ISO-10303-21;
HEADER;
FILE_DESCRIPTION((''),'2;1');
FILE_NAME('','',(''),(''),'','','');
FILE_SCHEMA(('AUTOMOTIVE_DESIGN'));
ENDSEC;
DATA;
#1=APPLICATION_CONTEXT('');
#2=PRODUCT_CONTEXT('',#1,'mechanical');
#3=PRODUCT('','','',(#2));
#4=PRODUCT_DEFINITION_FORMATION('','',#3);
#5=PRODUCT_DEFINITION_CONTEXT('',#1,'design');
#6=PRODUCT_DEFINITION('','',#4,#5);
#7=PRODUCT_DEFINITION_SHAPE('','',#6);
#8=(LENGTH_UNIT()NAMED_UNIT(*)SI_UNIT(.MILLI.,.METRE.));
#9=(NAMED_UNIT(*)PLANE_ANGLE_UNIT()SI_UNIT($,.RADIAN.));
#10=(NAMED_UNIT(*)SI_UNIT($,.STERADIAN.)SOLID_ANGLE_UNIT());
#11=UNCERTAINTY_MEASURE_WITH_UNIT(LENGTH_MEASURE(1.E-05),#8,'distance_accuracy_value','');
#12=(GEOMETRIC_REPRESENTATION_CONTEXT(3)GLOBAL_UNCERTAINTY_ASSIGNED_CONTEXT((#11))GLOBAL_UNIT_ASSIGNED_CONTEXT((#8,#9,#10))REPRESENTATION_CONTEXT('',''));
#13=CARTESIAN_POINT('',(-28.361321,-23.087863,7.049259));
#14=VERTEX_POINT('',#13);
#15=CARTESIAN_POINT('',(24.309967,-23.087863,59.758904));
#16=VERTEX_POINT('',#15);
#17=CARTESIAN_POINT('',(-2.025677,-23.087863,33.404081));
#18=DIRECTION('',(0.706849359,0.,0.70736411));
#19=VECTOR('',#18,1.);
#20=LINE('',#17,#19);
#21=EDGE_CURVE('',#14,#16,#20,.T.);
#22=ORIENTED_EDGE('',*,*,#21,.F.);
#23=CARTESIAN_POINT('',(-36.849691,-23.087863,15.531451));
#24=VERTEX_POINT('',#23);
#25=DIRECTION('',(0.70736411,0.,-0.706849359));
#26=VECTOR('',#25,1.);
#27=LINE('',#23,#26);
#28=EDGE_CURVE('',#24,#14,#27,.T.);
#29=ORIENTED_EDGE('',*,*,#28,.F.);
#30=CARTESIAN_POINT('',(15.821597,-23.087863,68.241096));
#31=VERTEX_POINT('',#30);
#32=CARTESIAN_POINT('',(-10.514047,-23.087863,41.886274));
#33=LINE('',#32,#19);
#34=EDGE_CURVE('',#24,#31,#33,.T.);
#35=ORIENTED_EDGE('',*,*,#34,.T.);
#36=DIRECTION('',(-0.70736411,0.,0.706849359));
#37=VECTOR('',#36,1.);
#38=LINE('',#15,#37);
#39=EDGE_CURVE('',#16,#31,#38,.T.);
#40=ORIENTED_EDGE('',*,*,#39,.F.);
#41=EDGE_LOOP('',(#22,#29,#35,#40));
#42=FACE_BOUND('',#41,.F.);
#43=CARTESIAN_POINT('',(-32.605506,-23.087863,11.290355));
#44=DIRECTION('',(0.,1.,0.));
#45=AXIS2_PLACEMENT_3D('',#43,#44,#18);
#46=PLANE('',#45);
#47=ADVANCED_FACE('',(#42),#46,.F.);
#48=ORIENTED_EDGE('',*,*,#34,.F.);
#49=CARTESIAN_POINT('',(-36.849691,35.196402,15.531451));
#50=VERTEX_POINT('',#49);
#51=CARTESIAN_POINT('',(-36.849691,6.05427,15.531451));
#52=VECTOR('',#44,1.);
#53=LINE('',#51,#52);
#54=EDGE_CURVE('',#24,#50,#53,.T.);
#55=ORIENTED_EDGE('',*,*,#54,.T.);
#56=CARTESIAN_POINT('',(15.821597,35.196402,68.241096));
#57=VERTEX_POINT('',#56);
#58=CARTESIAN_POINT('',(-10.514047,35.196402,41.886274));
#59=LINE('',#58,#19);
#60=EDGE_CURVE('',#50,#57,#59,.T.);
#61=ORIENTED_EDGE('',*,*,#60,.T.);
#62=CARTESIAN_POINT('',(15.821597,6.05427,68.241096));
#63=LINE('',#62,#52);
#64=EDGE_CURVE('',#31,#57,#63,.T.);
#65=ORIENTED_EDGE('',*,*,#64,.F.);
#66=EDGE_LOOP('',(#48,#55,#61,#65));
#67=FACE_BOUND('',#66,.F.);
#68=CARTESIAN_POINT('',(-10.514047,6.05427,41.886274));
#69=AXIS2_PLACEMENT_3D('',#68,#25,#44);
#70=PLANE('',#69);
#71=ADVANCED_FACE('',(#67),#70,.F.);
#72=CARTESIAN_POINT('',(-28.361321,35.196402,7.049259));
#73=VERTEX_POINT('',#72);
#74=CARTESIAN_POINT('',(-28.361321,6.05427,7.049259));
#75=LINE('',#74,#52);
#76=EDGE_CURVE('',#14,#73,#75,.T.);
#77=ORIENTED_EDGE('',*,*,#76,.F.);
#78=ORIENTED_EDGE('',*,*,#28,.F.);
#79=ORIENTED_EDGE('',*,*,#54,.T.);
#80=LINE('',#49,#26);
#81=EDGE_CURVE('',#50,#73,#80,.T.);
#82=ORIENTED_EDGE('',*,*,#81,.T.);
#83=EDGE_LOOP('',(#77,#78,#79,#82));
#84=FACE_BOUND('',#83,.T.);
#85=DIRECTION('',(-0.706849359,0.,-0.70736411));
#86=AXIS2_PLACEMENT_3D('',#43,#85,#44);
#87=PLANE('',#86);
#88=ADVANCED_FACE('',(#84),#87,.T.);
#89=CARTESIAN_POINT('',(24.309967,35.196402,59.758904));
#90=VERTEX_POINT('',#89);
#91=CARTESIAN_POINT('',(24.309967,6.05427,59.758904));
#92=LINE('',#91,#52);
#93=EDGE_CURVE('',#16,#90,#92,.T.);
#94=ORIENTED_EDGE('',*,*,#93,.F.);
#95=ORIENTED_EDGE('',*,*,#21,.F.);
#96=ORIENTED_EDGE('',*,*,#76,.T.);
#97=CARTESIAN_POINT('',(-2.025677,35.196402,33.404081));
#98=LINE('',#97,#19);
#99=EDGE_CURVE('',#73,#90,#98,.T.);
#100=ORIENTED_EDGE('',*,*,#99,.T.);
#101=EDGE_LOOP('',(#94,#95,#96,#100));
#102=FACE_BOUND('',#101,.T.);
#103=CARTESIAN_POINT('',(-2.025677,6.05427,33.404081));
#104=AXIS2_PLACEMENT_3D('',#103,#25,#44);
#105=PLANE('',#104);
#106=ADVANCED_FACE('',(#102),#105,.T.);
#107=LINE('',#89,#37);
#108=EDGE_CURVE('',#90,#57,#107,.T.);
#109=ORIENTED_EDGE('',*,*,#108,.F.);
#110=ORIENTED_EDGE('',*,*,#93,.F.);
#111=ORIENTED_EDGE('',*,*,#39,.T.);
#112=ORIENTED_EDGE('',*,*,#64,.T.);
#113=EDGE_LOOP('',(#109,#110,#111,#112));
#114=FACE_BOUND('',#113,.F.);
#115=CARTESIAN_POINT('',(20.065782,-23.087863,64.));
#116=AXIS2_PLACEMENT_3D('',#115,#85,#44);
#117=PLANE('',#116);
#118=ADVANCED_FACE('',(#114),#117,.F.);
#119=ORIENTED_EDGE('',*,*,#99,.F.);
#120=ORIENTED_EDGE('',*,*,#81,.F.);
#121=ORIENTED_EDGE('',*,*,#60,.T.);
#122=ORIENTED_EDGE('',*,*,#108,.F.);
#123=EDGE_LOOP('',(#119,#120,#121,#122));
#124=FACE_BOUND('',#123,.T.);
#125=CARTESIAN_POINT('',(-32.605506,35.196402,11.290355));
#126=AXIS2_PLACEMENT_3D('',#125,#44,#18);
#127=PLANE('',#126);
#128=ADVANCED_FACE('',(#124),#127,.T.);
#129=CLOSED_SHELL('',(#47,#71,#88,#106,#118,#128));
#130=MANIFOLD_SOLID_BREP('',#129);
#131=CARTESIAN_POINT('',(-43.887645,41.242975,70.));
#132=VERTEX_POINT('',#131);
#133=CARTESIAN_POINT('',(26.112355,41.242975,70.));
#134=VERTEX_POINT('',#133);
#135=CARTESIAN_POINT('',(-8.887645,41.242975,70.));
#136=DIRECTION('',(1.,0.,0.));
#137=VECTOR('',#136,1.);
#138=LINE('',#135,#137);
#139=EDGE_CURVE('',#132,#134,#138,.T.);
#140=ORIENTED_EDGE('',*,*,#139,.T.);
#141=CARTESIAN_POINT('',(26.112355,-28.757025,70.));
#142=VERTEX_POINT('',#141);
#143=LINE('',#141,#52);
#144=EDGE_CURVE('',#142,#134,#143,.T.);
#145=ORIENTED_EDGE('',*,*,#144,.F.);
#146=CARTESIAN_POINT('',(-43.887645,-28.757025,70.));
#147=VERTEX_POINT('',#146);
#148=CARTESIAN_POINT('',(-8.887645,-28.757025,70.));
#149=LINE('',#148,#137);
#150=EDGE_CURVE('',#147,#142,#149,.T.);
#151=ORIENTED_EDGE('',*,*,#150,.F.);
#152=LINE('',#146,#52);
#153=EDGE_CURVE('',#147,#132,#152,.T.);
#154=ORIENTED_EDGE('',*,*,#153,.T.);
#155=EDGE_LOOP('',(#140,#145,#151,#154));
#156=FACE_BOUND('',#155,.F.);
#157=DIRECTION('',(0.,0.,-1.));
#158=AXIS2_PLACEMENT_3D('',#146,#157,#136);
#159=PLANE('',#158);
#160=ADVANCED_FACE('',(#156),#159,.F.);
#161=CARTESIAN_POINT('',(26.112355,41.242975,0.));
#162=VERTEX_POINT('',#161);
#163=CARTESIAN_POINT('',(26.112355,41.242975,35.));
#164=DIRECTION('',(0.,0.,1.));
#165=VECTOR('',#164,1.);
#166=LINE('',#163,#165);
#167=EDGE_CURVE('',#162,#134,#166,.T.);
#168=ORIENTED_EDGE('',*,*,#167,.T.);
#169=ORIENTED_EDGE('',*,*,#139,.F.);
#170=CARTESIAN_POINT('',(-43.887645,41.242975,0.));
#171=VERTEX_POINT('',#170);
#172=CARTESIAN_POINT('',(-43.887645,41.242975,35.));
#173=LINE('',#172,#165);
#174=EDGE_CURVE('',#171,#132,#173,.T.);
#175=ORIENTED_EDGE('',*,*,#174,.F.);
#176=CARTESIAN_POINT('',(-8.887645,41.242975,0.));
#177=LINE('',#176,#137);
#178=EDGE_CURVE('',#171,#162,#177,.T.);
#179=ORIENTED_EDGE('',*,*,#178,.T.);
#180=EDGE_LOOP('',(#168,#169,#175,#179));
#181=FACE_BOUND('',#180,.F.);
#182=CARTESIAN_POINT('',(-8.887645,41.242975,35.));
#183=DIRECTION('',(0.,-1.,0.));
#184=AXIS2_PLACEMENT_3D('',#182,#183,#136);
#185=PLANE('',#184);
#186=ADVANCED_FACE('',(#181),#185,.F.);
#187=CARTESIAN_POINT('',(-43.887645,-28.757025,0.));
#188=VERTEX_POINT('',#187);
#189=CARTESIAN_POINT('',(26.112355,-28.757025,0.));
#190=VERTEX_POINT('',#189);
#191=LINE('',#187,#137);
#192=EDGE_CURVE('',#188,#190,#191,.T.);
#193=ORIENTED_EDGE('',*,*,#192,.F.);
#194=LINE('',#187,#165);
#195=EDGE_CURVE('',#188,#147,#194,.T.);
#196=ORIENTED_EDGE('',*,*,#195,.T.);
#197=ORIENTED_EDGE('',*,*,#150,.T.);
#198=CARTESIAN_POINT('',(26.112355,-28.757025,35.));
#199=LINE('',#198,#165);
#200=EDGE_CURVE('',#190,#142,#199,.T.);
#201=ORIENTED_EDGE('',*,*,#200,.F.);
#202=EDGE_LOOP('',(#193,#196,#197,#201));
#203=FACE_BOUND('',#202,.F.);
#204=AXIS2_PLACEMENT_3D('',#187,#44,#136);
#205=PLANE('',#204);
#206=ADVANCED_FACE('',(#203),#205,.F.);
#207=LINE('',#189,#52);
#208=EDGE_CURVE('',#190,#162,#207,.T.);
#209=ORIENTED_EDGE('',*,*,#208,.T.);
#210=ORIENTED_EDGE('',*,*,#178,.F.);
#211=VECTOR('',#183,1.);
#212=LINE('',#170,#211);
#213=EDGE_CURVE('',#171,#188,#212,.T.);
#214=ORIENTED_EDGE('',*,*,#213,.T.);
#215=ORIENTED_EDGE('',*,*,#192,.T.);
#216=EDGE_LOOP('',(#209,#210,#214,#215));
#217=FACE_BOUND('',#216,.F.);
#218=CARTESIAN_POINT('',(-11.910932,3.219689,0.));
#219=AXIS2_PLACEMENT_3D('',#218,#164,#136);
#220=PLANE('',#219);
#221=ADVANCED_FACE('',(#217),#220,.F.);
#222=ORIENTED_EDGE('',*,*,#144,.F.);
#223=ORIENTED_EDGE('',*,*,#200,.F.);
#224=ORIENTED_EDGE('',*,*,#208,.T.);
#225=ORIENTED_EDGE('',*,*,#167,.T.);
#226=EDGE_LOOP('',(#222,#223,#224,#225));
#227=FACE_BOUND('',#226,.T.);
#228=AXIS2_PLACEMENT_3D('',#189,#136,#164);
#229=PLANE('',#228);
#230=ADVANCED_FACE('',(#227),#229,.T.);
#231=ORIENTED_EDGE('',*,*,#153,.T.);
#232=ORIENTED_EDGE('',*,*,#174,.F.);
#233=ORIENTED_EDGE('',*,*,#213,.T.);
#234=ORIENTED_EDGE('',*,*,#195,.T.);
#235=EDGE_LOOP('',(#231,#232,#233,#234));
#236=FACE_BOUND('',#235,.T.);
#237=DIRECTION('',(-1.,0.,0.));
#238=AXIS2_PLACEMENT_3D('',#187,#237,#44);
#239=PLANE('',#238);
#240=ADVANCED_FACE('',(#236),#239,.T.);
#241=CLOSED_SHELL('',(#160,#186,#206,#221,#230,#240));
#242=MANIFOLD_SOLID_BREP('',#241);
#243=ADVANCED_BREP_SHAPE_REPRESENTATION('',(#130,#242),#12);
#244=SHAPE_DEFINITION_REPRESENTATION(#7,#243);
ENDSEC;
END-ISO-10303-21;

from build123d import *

# Parameters (mm, degrees)
F2_W           = 63.9534269655
F2_H           = 63.9534269655
F3_DEPTH       = 64
F7_W           = 70
F7_H           = 70
F8_DEPTH       = 70
F6_W           = 58.2842652881
F6_H           = 74.5155771047
F9_DEPTH       = 5.7
F9_DEPTH_BACK  = 6
F10_DEPTH      = 6
F10_DEPTH_BACK = 6


with BuildPart() as f3:
    # F2 (on Top) → F3 (new body)
    with BuildSketch(Plane.XY):
        with Locations((-11.9109315234, 3.2196889264)):
            Rectangle(F2_W, F2_H)
    extrude(amount=F3_DEPTH)

    # F7 (on face) → F8 (join)
    with BuildSketch(Plane.XZ.offset(28.7570245564)):
        with Locations((-8.8876450062, 35)):
            Rectangle(F7_W, F7_H)
    extrude(amount=-F8_DEPTH)


with BuildPart() as f9:
    # F6 (on face) → F9 (new body, two sides)
    with BuildSketch(Plane(origin=(-21.9597969133, 0, 21.9438166887), x_dir=(0, 1, 0), z_dir=(0.7073641101, 0, -0.7068493586))) as f9_sk:
        with Locations((6.054269765, 22.1969996005)):
            Rectangle(F6_W, F6_H)
    extrude(amount=F9_DEPTH)
    extrude(f9_sk.sketch, amount=-F9_DEPTH_BACK)

    # F6 (on face) → F10 (join, two sides)
    with BuildSketch(Plane(origin=(-21.9597969133, 0, 21.9438166887), x_dir=(0, 1, 0), z_dir=(0.7073641101, 0, -0.7068493586))) as f10_sk:
        with Locations((6.054269765, 22.1969996005)):
            Rectangle(F6_W, F6_H)
    extrude(amount=F10_DEPTH)
    extrude(f10_sk.sketch, amount=-F10_DEPTH_BACK)


solid = Compound([f3.part, f9.part])
